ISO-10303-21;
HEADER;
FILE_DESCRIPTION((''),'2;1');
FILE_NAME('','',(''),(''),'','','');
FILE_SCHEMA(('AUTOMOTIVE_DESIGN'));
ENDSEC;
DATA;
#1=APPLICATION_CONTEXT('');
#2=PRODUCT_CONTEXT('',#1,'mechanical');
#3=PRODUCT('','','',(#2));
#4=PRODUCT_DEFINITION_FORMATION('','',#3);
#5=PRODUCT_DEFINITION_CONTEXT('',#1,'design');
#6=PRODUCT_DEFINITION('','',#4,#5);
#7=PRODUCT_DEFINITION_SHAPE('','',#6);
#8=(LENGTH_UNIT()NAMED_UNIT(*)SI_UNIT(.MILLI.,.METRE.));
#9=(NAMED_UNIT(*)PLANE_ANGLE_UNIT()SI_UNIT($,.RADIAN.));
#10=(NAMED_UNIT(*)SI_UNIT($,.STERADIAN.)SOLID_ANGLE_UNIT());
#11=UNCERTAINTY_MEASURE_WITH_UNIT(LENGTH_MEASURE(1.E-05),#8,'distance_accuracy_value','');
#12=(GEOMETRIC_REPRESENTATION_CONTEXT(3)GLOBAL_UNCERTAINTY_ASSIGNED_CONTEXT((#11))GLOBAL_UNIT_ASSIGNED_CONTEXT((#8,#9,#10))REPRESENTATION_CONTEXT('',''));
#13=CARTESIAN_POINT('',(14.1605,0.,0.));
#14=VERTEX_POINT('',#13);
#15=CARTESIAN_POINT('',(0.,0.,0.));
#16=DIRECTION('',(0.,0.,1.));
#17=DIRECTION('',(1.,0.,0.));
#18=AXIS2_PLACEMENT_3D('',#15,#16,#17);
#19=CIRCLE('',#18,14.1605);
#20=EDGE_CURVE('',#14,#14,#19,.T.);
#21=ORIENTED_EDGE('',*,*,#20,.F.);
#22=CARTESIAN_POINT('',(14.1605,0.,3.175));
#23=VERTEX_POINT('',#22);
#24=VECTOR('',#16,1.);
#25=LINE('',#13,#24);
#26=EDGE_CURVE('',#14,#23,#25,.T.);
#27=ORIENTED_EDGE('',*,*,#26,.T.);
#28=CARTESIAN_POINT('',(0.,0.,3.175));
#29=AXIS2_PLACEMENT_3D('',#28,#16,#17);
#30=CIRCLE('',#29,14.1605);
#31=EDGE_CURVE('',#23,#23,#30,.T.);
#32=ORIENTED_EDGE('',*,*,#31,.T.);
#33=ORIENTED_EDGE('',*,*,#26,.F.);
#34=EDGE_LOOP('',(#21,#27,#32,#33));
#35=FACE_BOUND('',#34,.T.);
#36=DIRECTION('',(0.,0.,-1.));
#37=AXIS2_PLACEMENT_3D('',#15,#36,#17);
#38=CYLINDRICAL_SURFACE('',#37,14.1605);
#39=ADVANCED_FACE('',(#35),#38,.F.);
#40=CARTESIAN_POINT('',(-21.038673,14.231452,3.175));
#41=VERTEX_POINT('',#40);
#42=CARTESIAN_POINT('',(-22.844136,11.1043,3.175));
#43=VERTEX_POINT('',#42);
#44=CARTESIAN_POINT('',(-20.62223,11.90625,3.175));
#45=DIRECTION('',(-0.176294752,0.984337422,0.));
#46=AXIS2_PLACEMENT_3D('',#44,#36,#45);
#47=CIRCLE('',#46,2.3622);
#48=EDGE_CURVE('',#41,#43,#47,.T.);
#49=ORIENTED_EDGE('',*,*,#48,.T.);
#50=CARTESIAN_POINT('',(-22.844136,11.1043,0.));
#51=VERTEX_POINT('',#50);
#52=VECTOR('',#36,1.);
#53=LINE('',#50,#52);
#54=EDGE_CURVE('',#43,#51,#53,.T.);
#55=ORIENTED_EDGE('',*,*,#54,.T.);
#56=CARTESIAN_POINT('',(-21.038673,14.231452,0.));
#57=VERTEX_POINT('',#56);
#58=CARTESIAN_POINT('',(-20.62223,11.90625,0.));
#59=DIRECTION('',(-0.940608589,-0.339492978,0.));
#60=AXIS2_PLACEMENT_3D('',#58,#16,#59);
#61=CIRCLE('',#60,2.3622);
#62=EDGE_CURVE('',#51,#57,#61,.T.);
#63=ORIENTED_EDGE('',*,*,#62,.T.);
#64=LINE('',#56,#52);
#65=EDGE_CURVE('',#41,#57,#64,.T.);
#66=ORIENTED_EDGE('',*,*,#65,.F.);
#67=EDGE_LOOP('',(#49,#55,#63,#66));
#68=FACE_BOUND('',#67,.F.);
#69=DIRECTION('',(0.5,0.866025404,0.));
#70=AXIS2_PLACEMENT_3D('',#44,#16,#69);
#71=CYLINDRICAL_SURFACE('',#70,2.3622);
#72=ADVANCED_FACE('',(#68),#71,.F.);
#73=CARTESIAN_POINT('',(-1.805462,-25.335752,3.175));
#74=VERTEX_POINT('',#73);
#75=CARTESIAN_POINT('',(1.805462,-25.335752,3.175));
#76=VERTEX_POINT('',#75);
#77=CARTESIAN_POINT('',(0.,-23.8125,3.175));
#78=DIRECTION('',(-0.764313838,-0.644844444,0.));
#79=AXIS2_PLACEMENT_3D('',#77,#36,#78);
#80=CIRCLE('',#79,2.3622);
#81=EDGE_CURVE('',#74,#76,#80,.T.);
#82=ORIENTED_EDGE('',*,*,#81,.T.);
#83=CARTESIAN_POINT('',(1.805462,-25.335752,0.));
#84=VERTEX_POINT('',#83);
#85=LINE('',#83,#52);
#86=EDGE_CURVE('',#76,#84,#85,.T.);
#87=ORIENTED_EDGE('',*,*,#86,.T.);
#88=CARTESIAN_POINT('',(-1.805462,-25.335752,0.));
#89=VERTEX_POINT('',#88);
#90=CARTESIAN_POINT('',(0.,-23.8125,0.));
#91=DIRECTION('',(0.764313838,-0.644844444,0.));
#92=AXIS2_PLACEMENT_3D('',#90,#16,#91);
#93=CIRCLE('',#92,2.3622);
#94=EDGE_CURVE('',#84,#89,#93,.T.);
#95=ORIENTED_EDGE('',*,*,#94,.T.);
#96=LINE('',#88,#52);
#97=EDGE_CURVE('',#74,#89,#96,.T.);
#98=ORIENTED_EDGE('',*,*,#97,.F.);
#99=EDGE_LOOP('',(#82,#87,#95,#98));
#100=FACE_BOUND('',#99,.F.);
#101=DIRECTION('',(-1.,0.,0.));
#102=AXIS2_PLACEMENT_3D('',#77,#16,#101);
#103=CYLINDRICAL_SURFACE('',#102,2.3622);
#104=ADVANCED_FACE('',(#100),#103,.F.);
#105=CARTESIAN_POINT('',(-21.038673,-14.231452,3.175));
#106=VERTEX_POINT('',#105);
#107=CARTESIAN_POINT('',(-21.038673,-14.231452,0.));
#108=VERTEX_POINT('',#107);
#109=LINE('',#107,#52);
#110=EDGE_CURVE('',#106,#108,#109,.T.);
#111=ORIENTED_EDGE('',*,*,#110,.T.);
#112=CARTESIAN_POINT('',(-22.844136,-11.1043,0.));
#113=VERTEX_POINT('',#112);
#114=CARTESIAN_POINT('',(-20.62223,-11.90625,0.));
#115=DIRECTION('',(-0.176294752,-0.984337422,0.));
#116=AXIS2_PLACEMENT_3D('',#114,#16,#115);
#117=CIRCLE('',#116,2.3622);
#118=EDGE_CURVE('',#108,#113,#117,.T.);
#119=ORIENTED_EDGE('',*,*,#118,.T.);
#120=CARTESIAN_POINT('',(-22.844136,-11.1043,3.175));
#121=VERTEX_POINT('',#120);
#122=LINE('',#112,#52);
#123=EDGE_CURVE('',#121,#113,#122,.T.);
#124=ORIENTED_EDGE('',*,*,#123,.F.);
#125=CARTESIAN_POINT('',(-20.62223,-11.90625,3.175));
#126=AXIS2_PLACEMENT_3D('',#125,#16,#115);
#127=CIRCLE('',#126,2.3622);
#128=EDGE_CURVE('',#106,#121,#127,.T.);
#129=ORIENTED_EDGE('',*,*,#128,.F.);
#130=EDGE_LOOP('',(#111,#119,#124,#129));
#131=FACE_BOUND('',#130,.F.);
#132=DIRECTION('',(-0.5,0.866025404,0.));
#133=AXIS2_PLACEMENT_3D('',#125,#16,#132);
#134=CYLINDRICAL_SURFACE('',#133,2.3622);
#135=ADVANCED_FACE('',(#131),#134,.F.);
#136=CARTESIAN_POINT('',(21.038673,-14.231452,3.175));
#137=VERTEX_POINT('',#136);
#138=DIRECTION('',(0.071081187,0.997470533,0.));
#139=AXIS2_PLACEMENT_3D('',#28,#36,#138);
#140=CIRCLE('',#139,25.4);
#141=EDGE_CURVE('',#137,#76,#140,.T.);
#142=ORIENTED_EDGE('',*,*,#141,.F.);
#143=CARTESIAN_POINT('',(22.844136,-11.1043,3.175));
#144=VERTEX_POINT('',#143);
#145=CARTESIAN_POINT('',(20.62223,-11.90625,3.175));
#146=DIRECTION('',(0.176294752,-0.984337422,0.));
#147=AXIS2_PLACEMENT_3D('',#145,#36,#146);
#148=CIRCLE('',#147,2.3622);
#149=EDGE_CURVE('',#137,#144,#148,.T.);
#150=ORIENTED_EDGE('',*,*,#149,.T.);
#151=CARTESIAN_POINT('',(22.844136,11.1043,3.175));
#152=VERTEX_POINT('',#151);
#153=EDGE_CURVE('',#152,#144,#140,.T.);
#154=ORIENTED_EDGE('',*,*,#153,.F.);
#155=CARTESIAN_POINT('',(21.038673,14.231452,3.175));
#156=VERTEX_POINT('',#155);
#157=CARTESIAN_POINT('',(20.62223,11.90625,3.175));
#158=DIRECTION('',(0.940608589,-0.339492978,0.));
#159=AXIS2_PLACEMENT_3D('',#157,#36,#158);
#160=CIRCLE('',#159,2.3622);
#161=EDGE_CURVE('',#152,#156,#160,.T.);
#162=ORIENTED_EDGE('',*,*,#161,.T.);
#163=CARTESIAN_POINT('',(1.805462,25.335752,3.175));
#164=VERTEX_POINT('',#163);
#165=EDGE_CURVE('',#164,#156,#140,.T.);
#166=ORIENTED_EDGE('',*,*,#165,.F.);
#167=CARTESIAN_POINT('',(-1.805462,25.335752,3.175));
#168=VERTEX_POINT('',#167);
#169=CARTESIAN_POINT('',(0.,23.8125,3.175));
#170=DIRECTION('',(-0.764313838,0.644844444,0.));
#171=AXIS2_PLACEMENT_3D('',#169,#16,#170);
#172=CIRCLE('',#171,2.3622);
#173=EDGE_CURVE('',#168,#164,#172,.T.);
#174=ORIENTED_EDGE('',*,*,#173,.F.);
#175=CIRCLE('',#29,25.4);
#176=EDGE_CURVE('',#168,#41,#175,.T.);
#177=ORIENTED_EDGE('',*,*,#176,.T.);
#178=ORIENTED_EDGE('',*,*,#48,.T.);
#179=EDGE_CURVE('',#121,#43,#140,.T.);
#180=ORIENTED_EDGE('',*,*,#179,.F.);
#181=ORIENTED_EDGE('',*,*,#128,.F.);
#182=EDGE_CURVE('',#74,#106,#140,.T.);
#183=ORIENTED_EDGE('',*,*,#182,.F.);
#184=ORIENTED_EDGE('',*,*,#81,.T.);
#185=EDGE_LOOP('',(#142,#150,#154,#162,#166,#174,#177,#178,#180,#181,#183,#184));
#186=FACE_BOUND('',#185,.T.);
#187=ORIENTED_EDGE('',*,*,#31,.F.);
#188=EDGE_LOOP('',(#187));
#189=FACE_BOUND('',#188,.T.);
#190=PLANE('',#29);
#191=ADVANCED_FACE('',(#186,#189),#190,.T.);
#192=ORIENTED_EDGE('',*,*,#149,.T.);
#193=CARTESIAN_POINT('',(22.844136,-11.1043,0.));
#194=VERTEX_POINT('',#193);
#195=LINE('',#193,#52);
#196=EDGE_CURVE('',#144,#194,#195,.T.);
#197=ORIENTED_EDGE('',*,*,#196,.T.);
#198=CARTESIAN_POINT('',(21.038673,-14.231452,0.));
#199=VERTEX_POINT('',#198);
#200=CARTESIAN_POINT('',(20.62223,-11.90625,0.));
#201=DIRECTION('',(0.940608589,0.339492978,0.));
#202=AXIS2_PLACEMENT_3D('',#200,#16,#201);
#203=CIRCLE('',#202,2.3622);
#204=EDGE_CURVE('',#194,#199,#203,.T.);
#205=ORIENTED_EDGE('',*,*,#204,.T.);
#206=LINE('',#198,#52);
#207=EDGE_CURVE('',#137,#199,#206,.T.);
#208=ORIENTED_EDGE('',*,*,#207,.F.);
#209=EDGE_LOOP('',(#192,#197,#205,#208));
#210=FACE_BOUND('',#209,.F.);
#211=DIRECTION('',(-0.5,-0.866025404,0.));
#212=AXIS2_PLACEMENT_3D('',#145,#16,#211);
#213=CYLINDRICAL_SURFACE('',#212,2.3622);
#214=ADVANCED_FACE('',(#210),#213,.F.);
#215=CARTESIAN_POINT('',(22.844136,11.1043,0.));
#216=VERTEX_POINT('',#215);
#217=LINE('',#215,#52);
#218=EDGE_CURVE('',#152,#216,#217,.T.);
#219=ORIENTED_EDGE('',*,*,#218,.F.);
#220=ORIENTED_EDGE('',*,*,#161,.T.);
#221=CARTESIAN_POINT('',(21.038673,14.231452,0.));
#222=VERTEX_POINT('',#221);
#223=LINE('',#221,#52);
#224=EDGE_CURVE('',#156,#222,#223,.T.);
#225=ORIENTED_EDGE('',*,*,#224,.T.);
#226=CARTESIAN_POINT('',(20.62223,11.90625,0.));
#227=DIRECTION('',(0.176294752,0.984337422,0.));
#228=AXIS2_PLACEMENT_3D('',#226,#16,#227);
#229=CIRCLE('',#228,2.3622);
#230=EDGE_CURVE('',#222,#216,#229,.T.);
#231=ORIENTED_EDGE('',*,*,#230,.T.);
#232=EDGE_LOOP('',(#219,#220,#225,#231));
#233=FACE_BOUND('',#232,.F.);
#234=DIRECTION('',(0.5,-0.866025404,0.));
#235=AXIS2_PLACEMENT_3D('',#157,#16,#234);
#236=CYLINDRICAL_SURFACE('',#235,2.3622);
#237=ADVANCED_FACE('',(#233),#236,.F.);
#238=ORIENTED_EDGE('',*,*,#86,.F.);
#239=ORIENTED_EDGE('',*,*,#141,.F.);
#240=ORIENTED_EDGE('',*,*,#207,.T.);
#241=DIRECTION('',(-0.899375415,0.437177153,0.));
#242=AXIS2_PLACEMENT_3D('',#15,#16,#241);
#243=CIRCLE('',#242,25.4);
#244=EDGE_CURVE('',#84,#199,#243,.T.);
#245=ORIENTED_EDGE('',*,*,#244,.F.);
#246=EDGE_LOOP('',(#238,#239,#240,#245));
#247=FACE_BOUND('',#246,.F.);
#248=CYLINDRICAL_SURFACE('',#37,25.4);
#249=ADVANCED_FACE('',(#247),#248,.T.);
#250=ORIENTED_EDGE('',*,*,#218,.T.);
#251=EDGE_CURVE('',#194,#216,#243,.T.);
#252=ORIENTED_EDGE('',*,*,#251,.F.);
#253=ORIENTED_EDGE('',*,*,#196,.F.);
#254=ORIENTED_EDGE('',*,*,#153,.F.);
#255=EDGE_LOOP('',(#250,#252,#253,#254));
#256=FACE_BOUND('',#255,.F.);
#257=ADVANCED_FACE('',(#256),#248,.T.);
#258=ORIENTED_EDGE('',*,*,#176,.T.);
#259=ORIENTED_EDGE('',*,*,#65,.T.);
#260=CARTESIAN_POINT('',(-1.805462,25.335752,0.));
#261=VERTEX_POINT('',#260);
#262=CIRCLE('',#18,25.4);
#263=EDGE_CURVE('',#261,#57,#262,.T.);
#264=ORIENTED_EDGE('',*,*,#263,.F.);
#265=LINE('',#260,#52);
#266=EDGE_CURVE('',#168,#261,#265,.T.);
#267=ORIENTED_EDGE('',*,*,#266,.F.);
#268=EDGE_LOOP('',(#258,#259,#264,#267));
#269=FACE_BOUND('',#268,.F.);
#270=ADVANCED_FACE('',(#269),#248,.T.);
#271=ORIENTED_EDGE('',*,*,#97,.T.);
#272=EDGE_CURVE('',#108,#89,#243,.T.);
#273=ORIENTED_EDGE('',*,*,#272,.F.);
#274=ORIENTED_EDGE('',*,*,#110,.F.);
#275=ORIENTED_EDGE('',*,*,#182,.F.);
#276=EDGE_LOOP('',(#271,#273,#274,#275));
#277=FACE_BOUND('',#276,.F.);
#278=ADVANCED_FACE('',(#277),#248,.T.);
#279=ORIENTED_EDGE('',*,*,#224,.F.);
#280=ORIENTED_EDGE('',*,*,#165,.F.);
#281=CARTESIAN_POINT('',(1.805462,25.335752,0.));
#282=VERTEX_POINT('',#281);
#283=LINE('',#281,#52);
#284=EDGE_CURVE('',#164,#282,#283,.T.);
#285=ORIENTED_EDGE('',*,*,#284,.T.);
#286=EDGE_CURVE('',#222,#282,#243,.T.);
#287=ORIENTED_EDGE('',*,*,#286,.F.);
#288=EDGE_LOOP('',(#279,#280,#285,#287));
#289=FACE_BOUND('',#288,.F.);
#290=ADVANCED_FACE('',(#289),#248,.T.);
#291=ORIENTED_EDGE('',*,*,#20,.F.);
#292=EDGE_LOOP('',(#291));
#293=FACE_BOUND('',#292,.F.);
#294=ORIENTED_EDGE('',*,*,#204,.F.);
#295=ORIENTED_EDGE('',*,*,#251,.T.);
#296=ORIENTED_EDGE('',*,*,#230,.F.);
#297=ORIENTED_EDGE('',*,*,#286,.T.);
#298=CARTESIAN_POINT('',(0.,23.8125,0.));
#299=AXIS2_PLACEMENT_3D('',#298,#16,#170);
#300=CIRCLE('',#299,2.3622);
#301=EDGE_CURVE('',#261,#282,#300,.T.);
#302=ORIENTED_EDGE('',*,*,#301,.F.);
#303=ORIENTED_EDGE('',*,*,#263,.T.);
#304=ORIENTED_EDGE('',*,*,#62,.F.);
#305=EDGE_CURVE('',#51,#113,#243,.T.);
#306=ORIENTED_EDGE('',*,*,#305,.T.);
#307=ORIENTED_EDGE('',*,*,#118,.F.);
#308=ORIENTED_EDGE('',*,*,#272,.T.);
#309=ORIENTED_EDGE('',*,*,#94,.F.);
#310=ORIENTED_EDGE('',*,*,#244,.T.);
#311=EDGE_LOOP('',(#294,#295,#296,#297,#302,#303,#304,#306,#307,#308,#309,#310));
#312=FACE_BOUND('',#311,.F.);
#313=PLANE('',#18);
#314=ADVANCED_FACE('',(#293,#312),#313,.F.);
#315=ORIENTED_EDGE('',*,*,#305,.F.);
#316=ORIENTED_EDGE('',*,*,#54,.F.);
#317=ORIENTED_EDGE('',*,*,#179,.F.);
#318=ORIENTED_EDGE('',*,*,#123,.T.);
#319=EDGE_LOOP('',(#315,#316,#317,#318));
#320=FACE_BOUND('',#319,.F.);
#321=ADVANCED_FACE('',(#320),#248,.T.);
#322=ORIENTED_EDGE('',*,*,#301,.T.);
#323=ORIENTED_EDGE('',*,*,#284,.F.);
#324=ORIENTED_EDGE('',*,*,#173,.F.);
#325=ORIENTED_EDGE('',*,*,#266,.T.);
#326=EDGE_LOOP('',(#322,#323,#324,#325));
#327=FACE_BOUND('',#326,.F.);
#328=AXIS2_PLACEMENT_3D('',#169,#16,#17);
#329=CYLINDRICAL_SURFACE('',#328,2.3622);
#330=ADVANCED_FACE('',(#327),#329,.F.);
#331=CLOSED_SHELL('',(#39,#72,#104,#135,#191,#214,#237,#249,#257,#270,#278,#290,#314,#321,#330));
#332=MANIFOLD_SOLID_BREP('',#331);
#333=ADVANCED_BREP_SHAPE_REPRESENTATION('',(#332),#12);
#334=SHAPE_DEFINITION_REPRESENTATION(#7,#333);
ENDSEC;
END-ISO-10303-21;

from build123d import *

# Parameters (mm, degrees)
F0_R            = 25.4
F0_R_2          = 14.1605
F1_DEPTH        = 3.175
F2_R            = 2.3622
F3_DEPTH        = 3.176
F3_COPIES_COUNT = 6


# Not quite as in the source:
# - a pattern or mirror of a feature is missing from the dataset's text; its kind, count and spacing are read off the source's solid


with BuildPart() as f1:
    # F0 (on Top) → F1 (new body)
    with BuildSketch(Plane.XY):
        Circle(F0_R)
        Circle(F0_R_2, mode=Mode.SUBTRACT)
    extrude(amount=F1_DEPTH)

    # F2 (on face) → F3 (cut, through all)
    with BuildSketch(Plane.XY.offset(3.175)):
        with Locations((0, 23.8125)):
            Circle(F2_R)
    f3 = extrude(amount=-F3_DEPTH, mode=Mode.SUBTRACT)

    # F3_copies: F3 ×6 about axis
    f3_copies_axis = Axis((0, 0, 0), (0, 0, 1))
    for i in range(1, F3_COPIES_COUNT):
        add(f3.rotate(f3_copies_axis, i * 360 / F3_COPIES_COUNT), mode=Mode.SUBTRACT)


solid = f1.part
